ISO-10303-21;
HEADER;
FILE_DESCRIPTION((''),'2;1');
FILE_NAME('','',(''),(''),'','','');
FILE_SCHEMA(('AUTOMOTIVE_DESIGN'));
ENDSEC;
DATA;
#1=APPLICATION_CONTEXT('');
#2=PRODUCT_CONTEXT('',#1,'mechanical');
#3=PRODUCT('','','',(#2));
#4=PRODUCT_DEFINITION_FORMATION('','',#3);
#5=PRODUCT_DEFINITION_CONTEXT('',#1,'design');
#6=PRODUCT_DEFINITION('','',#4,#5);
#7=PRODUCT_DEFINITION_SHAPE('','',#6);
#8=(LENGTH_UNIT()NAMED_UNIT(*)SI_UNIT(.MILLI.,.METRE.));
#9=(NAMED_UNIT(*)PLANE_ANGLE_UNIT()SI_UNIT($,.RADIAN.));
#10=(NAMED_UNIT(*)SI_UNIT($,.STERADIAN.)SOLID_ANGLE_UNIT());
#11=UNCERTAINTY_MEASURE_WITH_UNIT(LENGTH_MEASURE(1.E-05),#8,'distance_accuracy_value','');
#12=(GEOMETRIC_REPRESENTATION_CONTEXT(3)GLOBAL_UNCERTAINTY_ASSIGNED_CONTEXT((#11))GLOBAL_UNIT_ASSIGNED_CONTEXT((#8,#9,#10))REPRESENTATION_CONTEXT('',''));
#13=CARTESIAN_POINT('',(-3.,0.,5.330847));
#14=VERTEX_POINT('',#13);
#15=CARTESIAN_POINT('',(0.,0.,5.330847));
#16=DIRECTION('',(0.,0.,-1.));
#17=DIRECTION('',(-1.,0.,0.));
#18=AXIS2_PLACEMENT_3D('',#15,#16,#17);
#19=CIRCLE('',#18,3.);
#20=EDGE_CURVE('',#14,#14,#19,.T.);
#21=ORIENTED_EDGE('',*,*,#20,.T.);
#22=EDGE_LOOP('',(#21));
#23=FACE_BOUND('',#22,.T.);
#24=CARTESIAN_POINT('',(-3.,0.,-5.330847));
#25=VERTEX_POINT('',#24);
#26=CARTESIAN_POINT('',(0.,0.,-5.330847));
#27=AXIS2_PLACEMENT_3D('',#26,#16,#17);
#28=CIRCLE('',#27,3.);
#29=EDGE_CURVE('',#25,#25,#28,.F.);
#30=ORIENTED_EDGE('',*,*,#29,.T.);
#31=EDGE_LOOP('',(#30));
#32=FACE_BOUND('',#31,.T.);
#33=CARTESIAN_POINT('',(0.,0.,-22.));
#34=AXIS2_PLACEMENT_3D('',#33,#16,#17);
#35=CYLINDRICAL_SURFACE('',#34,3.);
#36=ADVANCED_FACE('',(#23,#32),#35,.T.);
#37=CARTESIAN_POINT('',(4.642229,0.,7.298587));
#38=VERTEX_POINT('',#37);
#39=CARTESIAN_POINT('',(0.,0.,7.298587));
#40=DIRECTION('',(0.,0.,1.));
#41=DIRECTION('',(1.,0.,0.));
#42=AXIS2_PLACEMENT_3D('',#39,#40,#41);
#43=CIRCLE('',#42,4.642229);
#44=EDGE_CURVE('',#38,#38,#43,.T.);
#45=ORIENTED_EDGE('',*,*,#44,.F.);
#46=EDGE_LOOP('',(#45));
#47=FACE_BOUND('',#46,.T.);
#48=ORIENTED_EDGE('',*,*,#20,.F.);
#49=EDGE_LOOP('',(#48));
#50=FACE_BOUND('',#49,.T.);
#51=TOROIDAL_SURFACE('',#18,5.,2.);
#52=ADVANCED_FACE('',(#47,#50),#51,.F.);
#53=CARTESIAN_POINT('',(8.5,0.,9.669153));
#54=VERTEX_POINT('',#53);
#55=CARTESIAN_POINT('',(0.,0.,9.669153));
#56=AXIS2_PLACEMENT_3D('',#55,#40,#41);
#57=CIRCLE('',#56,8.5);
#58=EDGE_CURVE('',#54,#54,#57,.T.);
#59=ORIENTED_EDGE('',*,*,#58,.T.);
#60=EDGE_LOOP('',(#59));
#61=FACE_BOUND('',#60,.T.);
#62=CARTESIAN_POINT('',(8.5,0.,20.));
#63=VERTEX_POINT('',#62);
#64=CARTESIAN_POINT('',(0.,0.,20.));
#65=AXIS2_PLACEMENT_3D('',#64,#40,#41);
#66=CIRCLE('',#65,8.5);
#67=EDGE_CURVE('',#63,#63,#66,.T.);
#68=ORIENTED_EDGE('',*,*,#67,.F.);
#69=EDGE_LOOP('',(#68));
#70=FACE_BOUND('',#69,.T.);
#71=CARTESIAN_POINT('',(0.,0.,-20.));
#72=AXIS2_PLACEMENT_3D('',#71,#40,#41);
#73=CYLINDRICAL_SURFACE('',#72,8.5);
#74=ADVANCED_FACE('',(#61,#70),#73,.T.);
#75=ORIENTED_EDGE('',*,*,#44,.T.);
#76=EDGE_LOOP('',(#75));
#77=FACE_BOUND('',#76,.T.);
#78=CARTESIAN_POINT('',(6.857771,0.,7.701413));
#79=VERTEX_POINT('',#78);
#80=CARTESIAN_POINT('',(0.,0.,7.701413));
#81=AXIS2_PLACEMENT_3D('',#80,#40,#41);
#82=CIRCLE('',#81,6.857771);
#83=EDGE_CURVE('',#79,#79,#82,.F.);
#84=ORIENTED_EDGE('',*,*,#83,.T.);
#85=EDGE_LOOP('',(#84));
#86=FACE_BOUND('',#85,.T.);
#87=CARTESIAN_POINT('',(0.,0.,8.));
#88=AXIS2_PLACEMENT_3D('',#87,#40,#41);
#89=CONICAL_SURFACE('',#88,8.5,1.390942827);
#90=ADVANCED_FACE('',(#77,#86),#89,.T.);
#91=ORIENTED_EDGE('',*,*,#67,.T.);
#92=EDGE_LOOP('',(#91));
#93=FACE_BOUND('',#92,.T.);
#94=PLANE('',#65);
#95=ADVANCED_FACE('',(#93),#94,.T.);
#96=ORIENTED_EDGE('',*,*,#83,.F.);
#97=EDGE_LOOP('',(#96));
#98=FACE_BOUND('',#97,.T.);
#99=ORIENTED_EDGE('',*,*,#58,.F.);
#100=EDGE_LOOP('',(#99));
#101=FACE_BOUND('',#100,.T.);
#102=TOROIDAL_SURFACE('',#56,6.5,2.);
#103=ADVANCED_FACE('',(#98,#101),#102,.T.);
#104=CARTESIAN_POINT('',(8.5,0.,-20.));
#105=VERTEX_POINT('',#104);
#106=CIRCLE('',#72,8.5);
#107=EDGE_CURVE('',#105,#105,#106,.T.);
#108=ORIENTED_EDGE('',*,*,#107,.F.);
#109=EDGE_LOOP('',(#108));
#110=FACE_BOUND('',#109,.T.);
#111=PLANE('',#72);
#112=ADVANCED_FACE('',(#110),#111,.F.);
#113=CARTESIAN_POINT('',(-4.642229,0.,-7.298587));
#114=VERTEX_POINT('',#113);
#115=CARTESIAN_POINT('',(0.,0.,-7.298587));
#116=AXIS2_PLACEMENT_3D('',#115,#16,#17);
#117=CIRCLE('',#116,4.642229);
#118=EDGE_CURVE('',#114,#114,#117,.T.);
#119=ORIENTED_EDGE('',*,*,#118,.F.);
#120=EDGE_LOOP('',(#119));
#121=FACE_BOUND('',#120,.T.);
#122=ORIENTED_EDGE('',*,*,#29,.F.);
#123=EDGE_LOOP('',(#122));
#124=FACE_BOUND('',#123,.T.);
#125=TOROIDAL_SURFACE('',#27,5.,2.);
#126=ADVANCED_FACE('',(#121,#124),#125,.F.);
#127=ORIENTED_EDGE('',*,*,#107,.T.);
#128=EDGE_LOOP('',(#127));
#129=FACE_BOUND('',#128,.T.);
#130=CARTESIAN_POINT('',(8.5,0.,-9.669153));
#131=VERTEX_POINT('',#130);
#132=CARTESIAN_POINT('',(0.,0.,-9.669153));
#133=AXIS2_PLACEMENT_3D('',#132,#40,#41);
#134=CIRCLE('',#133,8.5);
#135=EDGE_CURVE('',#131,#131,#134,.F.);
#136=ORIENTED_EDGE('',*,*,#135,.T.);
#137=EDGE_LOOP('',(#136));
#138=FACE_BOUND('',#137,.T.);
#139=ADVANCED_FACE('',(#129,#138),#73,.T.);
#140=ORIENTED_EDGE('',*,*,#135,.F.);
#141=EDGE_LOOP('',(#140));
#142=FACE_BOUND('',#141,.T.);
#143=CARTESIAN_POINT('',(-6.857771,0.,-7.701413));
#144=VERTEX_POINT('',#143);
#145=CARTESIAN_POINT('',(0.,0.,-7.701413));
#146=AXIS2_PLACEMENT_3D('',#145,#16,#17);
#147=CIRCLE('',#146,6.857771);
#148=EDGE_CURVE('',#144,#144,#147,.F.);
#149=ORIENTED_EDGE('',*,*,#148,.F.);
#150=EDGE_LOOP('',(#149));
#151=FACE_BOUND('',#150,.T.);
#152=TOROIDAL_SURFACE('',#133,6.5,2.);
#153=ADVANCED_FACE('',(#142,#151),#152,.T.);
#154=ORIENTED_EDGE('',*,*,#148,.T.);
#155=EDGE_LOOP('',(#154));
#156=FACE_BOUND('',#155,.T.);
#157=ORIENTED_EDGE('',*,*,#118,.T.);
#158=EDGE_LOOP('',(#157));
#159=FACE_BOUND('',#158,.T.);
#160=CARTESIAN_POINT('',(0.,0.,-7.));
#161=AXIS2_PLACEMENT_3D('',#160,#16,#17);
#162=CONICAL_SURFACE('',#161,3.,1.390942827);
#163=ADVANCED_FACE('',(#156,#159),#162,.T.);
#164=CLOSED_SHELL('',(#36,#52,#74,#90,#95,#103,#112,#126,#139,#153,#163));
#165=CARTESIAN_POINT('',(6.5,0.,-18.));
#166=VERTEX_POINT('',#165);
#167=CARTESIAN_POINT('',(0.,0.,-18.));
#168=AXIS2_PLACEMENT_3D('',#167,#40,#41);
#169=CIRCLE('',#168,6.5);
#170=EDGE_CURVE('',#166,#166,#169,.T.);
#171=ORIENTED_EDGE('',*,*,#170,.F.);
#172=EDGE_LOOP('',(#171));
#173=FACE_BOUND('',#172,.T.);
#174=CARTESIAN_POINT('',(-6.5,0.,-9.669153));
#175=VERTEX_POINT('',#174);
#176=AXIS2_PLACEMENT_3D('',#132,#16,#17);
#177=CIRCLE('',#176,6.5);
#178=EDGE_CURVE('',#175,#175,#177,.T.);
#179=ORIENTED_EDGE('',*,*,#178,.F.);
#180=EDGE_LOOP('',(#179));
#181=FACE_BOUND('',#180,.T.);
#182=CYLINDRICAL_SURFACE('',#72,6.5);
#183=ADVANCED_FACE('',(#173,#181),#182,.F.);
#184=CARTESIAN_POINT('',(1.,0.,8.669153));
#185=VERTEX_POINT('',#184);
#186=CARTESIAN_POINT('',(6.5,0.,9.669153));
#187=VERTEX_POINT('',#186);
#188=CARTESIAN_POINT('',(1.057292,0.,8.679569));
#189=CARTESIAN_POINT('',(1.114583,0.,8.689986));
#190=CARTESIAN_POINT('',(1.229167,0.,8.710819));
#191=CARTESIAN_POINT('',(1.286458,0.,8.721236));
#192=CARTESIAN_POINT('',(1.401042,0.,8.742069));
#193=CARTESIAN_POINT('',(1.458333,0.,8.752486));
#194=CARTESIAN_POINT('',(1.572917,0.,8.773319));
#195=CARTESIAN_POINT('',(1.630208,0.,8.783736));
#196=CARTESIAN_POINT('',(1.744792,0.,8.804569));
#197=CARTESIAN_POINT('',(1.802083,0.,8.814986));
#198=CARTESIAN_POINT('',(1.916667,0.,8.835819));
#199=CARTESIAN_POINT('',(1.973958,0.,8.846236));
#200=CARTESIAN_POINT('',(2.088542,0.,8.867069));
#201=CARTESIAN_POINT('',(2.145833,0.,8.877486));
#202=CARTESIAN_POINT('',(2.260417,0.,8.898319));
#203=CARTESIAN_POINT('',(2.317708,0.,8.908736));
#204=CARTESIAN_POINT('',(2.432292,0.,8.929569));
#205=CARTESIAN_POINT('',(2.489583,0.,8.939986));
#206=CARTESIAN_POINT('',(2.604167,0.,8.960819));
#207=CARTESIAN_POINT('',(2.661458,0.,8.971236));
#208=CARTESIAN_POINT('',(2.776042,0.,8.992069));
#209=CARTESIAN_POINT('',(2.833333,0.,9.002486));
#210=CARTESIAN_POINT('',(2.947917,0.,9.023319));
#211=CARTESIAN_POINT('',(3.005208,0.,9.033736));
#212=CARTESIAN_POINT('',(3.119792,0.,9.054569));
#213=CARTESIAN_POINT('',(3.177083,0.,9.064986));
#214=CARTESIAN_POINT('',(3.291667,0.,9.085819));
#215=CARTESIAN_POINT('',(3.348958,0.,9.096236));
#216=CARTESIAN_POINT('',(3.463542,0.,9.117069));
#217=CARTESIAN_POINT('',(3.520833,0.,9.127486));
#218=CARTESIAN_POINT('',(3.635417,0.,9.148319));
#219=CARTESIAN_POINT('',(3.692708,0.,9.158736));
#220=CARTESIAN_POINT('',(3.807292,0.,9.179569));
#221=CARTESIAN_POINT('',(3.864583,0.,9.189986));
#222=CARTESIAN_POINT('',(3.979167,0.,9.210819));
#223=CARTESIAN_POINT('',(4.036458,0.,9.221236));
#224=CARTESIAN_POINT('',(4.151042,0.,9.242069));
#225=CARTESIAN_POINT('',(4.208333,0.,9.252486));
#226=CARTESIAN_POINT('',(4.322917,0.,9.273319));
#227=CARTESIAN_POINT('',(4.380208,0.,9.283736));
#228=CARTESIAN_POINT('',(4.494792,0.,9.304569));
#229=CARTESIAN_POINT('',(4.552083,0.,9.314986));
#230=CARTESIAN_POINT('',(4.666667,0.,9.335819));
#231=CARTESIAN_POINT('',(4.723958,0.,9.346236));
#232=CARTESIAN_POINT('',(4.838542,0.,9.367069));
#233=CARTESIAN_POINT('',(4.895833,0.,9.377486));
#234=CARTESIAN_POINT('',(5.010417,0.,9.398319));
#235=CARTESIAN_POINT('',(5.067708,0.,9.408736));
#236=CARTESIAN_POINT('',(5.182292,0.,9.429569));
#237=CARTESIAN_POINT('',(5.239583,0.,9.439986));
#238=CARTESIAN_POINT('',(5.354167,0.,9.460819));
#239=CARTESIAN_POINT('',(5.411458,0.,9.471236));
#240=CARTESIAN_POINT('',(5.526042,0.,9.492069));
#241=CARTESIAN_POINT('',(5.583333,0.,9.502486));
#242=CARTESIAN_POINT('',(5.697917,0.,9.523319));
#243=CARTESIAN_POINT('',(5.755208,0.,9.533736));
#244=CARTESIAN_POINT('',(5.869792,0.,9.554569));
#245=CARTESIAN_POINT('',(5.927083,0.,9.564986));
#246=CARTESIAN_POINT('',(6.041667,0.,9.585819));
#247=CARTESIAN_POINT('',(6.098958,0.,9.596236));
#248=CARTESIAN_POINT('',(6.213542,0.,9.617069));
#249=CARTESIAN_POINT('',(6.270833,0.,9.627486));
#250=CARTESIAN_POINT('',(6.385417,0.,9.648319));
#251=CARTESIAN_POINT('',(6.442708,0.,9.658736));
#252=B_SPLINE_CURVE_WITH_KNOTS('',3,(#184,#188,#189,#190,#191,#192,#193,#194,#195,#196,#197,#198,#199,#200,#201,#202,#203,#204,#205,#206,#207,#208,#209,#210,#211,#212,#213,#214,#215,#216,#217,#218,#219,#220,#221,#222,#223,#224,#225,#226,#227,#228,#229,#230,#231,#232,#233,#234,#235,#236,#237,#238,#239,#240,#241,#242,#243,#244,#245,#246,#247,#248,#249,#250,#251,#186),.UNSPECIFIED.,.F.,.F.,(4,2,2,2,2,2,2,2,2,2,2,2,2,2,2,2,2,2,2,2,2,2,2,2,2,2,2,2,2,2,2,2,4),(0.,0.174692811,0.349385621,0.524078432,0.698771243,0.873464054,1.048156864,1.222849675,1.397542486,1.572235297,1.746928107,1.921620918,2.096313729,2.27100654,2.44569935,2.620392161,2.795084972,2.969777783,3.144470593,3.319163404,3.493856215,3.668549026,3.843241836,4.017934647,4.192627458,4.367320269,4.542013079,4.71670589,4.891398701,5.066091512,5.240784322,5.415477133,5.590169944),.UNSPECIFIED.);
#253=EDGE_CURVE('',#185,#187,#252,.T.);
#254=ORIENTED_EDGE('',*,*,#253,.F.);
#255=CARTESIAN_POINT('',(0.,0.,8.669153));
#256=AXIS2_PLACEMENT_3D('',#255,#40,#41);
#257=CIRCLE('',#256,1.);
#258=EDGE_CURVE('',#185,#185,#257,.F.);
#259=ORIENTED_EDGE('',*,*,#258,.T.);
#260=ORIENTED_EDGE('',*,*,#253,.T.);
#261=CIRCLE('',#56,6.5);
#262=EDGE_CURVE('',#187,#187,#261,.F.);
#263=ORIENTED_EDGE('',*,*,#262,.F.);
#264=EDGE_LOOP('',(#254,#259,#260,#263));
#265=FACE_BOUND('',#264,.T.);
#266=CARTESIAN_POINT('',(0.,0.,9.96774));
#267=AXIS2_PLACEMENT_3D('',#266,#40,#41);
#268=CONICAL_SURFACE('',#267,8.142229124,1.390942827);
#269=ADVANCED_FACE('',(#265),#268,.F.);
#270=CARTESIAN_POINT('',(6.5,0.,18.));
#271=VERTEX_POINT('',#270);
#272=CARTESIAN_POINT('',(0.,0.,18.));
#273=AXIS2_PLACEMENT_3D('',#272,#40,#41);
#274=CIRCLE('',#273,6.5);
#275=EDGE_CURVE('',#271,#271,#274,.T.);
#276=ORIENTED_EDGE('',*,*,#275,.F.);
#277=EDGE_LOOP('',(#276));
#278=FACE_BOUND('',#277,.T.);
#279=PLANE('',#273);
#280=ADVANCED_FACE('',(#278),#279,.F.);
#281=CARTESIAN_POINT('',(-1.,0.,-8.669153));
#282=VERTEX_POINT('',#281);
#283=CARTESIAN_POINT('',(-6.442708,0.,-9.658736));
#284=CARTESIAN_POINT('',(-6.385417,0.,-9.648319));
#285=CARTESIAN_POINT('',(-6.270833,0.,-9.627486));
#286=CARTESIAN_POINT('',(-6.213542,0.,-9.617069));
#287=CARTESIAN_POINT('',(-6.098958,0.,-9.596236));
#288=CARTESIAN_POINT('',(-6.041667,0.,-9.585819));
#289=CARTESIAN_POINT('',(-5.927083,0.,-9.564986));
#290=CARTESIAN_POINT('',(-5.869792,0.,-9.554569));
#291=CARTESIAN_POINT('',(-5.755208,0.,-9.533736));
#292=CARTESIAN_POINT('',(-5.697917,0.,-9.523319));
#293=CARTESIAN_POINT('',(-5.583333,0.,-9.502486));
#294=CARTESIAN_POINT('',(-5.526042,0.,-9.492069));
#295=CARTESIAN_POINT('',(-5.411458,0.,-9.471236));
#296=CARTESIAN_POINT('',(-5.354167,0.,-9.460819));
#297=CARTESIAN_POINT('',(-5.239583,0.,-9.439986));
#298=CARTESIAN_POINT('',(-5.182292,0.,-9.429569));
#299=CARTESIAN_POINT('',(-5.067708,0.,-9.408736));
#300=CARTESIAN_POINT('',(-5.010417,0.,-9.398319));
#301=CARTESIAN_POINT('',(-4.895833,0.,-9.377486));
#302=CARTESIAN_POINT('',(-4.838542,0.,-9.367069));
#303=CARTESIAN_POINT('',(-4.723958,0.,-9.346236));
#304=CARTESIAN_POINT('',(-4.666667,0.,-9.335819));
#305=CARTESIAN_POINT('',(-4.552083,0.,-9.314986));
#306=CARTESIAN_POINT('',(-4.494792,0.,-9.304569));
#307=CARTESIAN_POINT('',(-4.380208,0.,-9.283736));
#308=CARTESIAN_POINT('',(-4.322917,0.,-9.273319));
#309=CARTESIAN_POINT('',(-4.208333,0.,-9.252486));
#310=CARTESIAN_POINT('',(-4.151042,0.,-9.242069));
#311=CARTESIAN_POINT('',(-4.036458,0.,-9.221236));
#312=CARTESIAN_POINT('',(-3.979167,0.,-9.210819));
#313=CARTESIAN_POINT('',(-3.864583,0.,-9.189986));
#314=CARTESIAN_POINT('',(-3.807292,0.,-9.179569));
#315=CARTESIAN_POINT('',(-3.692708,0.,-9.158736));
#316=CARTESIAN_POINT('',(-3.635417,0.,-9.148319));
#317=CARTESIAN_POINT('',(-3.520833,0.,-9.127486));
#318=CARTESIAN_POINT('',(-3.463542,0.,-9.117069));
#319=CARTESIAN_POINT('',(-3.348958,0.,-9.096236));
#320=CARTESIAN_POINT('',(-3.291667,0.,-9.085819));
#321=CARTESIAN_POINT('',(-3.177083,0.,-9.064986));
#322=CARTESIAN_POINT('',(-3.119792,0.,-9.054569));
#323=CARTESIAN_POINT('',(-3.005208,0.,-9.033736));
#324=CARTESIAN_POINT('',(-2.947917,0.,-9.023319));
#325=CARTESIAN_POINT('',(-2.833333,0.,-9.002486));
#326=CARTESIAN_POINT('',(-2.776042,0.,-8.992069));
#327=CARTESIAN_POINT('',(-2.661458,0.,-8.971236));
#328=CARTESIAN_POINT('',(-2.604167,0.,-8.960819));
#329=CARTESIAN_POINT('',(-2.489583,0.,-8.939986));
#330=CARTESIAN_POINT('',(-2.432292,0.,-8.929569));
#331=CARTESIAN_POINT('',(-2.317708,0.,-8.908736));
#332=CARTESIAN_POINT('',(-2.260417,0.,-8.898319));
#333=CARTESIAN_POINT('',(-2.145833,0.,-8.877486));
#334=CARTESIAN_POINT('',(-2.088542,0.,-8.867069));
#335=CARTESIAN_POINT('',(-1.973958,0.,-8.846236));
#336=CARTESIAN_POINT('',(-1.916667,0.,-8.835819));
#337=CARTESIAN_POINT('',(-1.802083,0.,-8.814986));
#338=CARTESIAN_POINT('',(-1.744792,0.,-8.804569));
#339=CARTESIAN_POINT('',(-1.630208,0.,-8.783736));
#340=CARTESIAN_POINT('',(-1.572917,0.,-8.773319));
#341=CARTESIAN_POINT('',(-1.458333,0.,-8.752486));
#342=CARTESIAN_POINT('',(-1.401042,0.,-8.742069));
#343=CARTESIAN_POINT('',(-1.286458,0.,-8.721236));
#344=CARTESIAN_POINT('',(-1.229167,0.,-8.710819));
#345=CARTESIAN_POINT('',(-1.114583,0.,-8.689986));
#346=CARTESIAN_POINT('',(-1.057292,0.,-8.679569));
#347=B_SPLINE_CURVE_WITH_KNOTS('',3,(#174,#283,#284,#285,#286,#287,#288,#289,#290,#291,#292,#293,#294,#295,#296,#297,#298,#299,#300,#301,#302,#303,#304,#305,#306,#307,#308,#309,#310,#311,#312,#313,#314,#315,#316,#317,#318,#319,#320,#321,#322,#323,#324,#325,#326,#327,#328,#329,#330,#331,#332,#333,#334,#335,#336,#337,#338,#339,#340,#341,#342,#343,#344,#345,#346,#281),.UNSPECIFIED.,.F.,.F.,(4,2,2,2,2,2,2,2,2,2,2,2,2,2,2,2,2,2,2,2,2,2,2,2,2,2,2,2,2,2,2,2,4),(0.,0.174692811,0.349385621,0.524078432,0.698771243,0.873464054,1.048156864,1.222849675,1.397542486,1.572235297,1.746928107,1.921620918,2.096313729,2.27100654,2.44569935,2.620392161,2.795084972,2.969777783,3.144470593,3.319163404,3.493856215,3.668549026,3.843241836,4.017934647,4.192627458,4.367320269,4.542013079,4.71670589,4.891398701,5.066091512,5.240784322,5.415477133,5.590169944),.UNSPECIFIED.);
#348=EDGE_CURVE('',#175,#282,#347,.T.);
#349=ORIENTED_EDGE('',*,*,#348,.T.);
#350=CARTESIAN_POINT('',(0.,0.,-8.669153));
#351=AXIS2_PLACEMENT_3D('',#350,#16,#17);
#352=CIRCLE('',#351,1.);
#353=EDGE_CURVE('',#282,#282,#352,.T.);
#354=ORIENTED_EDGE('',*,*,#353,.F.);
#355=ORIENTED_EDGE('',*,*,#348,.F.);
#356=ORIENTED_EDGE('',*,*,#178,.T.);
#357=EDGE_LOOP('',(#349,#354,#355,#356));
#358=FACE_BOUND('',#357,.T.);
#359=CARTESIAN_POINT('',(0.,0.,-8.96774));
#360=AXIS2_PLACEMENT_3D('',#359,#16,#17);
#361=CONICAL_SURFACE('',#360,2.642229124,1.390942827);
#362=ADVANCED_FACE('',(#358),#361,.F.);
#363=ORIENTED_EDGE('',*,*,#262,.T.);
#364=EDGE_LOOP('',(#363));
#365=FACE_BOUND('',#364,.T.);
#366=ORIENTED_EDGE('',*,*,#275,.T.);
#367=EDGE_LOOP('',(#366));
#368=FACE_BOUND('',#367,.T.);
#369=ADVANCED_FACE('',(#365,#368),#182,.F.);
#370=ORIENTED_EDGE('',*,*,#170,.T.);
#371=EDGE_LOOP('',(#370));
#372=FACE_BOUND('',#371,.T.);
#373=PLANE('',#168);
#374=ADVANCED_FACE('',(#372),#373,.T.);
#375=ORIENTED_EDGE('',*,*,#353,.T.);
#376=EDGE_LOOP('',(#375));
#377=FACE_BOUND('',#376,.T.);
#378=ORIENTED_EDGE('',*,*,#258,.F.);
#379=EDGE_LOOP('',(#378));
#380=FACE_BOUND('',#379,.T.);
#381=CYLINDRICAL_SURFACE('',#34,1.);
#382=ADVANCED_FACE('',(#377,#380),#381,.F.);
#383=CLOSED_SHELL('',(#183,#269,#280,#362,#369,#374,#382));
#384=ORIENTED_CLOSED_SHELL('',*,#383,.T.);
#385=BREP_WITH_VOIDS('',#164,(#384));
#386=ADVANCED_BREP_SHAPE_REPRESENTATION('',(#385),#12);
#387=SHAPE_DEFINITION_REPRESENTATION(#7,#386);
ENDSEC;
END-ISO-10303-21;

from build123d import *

# Parameters (mm, degrees)
BOSS_EXTRUDE1_DEPTH      = 20
BOSS_EXTRUDE1_DEPTH_BACK = 20
SKETCH1_R                = 8.5
FILLET1_R                = 2


# Read off the part's stored shape, not the designer's step: Shell1
with BuildPart() as part:
    # Sketch1 → Boss-Extrude1 (new, two sides: drawn at the far end of the back side and taken through both)
    with BuildSketch(Plane.XY.offset(-BOSS_EXTRUDE1_DEPTH_BACK)):
        Circle(SKETCH1_R)
    extrude(amount=BOSS_EXTRUDE1_DEPTH + BOSS_EXTRUDE1_DEPTH_BACK)

    # Sketch2 → Cut-Revolve1 (revolve, cut)
    with BuildSketch(Plane(origin=(0, 0, 0), x_dir=(0, 0, -1), z_dir=(1, 0, 0)), mode=Mode.PRIVATE) as cut_revolve1_sk:
        Polygon((-8, 8.5), (8, 8.5), (7, 3), (-7, 3), align=None)
    revolve(cut_revolve1_sk.sketch.rotate(Axis((0, 0, -22), (0, 0, 1)), 90), axis=Axis((0, 0, -22), (0, 0, 1)), mode=Mode.SUBTRACT)

    # Shell1 outline → Shell1 (revolve, cut)
    with BuildSketch(Plane.XZ):
        Polygon((1, 8.669152707), (6.5, 9.669152707), (6.5, 18), (0, 18), (0, -18), (6.5, -18), (6.5, -9.669152707), (1, -8.669152707), align=None)
    revolve(axis=Axis((0, 0, 0), (0, 0, 1)), mode=Mode.SUBTRACT)

    # Fillet1
    fillet1_edges = [part.edges().sort_by_distance(p)[0] for p in [
        (3, 0, 7),
        (0, 8.5, 8),
        (0, 8.5, -8),
        (3, 0, -7),
    ]]
    fillet(fillet1_edges, radius=FILLET1_R)


solid = part.part
